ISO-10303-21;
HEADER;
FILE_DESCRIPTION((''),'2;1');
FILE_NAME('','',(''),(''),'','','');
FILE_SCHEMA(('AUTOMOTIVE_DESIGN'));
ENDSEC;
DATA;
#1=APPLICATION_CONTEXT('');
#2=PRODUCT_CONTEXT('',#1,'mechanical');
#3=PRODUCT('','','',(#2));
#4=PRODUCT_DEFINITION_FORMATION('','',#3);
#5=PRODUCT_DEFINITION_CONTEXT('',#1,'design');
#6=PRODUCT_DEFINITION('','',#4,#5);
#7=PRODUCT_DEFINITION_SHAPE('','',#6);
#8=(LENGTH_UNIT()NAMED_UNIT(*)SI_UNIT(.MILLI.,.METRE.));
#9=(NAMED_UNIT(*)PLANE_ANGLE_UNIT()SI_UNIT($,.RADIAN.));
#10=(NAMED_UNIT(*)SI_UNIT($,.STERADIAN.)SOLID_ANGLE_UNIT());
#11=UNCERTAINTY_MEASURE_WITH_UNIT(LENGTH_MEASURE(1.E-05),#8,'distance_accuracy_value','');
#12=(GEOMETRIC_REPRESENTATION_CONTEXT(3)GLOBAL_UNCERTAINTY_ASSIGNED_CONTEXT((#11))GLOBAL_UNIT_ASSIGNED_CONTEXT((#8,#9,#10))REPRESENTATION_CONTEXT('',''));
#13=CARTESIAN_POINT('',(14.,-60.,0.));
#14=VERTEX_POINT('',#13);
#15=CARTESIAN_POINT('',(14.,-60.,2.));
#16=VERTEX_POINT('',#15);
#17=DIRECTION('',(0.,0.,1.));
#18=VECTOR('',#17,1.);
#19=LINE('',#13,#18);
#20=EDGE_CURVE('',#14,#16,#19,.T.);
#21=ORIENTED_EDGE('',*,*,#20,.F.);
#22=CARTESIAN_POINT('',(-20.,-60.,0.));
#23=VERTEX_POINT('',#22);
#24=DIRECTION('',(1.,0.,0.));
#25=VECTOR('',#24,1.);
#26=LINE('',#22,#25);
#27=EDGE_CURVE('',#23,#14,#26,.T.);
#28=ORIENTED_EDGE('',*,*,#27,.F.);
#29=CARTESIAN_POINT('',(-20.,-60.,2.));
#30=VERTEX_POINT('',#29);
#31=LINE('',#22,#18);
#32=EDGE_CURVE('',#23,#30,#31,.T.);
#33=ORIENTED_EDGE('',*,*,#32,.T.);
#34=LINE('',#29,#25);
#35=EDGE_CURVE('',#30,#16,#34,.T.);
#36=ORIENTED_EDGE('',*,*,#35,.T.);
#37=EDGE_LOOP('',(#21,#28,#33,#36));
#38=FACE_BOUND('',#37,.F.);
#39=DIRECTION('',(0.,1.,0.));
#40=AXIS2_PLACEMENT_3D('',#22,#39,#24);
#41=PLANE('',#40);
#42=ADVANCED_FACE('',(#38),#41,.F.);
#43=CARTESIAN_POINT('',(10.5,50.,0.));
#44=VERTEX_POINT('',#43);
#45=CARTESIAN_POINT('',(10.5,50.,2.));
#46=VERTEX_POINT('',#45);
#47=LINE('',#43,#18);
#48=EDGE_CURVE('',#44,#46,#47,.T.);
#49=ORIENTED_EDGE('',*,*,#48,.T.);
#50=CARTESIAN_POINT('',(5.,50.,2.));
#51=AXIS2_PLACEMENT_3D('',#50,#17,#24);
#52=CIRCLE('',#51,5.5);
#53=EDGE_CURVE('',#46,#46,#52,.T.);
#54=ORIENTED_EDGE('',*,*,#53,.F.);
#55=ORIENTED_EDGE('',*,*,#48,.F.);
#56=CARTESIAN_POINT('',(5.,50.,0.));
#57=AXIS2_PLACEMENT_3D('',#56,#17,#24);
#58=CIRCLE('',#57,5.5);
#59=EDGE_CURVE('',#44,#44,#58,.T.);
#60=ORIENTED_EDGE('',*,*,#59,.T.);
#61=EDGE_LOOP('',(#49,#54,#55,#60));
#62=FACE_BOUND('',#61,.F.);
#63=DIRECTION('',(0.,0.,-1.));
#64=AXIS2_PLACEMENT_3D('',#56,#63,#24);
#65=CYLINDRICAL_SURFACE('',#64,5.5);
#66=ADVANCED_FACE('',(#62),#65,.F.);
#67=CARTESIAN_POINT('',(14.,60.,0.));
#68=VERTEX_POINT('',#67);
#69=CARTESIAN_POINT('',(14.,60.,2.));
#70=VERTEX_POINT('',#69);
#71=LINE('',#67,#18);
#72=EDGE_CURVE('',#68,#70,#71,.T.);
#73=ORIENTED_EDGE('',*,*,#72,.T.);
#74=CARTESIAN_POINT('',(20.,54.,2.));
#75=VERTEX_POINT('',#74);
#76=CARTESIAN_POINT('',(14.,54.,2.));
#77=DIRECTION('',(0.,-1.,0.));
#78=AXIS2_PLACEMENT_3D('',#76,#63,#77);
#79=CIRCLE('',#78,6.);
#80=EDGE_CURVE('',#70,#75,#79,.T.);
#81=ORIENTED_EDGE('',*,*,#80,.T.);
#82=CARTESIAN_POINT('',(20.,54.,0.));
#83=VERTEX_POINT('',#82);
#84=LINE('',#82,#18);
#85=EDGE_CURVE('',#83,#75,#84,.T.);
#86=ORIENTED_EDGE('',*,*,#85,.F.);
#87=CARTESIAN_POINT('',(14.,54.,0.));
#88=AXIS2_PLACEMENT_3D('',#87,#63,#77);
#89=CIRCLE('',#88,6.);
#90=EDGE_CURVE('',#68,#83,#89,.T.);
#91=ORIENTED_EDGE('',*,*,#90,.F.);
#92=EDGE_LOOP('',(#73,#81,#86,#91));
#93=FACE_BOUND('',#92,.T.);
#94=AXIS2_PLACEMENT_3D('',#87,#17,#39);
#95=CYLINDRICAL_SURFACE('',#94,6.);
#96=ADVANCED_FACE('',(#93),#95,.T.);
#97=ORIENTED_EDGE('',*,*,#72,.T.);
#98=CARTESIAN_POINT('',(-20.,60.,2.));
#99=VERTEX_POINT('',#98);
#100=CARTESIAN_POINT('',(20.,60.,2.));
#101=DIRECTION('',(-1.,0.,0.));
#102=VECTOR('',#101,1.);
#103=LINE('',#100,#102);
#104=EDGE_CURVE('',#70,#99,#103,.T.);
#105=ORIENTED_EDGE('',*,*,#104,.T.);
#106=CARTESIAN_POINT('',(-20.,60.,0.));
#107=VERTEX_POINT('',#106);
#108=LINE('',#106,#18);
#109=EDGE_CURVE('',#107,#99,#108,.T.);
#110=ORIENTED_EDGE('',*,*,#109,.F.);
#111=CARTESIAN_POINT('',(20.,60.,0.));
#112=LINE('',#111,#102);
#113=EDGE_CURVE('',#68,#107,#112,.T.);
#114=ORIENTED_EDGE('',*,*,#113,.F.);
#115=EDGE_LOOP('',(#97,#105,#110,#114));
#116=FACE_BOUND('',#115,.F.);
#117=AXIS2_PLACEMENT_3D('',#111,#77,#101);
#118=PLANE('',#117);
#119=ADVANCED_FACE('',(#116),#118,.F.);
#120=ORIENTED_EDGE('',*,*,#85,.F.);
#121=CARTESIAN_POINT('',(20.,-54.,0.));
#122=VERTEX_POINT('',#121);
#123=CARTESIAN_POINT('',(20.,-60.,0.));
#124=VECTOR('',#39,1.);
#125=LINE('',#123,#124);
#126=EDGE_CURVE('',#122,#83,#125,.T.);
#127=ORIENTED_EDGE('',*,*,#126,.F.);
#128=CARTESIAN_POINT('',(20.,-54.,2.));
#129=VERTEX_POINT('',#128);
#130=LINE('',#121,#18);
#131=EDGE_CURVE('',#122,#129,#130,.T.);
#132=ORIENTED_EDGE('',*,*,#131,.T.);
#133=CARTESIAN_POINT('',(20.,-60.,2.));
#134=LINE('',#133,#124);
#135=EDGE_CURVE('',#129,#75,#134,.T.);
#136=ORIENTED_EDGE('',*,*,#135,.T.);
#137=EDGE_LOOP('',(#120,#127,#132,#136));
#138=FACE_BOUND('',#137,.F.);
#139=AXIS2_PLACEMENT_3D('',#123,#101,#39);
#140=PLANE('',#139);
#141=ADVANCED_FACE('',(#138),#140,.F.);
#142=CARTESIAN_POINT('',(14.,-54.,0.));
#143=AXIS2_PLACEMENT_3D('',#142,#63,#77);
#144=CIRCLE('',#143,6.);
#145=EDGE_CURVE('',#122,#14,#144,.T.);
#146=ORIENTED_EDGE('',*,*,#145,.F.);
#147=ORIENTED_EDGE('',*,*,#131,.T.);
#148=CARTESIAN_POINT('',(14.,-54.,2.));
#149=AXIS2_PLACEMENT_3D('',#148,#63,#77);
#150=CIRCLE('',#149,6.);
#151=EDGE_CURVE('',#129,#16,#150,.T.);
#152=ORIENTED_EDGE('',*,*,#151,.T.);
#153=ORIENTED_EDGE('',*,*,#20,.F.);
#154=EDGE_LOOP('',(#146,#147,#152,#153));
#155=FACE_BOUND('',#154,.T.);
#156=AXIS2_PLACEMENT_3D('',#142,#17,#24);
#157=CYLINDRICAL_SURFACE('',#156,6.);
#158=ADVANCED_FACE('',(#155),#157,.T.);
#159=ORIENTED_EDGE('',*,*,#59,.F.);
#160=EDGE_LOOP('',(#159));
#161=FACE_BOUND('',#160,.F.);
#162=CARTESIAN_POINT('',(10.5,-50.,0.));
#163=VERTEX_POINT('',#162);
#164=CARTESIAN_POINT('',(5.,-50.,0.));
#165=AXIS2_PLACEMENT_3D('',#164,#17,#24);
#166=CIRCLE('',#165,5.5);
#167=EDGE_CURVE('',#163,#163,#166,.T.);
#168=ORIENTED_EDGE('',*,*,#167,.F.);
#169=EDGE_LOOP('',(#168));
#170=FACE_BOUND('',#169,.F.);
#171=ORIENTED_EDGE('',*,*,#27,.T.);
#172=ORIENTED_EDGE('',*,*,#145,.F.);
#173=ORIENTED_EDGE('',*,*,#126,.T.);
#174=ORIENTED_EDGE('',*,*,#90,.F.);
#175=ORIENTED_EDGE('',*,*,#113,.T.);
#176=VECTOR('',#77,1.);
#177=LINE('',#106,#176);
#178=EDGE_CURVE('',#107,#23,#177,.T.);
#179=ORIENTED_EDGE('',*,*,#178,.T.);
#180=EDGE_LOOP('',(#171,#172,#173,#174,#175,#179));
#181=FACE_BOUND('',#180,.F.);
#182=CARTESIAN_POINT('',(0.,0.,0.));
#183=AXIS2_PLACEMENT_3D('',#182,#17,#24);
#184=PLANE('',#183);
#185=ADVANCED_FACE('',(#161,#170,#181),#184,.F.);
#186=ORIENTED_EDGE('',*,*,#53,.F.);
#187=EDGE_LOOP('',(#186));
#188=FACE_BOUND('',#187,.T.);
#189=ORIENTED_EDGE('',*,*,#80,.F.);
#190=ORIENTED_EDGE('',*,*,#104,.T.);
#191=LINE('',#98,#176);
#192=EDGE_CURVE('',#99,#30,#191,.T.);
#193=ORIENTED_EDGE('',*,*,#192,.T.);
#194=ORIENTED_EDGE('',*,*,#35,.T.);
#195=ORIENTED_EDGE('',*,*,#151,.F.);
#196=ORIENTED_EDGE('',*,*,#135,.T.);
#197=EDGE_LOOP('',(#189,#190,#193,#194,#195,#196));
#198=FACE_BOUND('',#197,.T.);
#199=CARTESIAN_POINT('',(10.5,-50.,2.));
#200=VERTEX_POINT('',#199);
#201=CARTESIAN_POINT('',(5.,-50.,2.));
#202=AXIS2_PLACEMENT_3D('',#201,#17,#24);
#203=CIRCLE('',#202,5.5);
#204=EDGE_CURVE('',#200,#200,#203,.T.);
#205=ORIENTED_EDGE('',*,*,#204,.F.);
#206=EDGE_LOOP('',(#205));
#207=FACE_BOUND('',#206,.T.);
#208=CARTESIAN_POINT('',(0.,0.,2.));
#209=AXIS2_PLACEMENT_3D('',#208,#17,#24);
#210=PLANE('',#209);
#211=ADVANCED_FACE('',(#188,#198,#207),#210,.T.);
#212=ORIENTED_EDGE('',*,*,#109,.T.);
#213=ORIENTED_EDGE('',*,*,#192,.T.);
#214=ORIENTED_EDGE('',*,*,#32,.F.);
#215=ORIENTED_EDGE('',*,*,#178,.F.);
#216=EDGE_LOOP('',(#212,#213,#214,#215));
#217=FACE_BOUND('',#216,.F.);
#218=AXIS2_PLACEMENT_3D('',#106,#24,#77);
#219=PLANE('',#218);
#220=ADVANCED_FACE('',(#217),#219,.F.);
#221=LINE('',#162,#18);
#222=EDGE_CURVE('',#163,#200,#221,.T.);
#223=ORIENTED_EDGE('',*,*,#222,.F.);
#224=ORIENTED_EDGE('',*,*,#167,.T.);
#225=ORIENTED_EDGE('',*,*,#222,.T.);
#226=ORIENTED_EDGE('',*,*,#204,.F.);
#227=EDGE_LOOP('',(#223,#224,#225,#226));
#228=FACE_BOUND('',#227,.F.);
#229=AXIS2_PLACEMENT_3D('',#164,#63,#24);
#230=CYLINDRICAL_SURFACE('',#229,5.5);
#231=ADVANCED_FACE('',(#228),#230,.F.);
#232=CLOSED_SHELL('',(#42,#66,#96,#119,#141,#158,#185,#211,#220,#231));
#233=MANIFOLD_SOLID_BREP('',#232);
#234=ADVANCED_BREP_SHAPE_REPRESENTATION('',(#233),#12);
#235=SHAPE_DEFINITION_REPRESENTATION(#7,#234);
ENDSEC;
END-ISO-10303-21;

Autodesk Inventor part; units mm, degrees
ref_plane "YZ Plane" through (0, 0, 0) normal (1, 0, 0) x (0, 1, 0)
ref_plane "XZ Plane" through (0, 0, 0) normal (0, 1, 0) x (-1, 0, 0)
ref_plane "XY Plane" through (0, 0, 0) normal (0, 0, 1) x (1, 0, 0)
sketch "Sketch1" plane through (0, 0, 0) normal (0, 0, 1) x (1, 0, 0)
  line L0 (-20, -60) -> (20, -60)
  line L1 (20, -60) -> (20, 60)
  line L2 (20, 60) -> (-20, 60)
  line L3 (-20, 60) -> (-20, -60)
  line L4 (-20, -60) -> (20, 60) construction
  line L5 (20, -60) -> (-20, 60) construction
  circle A0 centre (5, 50) radius 5.5
  circle A1 centre (5, -50) radius 5.5
  line L6 (-20, 0) -> (20, 0) construction
  point P0 (0, 0)
  point P1 (0, 0)
  dimension "d0" = 40
  dimension "d1" = 120
  dimension "d12" = 11
  dimension "d13" = 100
  dimension "d15" = 15
extrude "Plate1" add sketch "Sketch1" along normal blind 2
sketch "Sketch2" plane through (0, 0, 0) normal (0, 0, -1) x (-1, 0, 0)
  line L0 (0, 40) -> (200, 40) construction
  line L1 (200, 40) -> (200, 20) construction
  line L2 (200, 20) -> (0, 20) construction
  line L3 (0, 20) -> (0, 40) construction
  line L4 (-20, 60) -> (20, 60) projected
  line L5 (-20, -60) -> (-20, 60) projected
  point P0 (0, 0)
  point P1 (-48, 100)
  point P2 (20, 60)
  point P3 (-50, 98)
  dimension "d6" = 200
  dimension "d9" = 20
  dimension "d10" = 20
  dimension "d11" = 20
mark "Mark1"
fillet "Corner Round1" radius 6 2 edges at (20, -60, 1) (20, 60, 1)
equation "\"d2\" = Thickness"
equation "\"BendReliefWidth\" = Thickness"
equation "\"BendReliefDepth\" = 0.5 * Thickness"
equation "\"CornerReliefSize\" = 4 * Thickness"
equation "\"MinimumRemnant\" = 2 * Thickness"
equation "\"TransitionRadius\" = BendRadius"
equation "\"JacobiRadiusSize\" = BendRadius"
equation "\"GapSize\" = Thickness"
equation "\"Thickness\" = 2"
equation "\"BendRadius\" = 2.75"
properties part number "TRM 023 face damper" material "AISI 304"
